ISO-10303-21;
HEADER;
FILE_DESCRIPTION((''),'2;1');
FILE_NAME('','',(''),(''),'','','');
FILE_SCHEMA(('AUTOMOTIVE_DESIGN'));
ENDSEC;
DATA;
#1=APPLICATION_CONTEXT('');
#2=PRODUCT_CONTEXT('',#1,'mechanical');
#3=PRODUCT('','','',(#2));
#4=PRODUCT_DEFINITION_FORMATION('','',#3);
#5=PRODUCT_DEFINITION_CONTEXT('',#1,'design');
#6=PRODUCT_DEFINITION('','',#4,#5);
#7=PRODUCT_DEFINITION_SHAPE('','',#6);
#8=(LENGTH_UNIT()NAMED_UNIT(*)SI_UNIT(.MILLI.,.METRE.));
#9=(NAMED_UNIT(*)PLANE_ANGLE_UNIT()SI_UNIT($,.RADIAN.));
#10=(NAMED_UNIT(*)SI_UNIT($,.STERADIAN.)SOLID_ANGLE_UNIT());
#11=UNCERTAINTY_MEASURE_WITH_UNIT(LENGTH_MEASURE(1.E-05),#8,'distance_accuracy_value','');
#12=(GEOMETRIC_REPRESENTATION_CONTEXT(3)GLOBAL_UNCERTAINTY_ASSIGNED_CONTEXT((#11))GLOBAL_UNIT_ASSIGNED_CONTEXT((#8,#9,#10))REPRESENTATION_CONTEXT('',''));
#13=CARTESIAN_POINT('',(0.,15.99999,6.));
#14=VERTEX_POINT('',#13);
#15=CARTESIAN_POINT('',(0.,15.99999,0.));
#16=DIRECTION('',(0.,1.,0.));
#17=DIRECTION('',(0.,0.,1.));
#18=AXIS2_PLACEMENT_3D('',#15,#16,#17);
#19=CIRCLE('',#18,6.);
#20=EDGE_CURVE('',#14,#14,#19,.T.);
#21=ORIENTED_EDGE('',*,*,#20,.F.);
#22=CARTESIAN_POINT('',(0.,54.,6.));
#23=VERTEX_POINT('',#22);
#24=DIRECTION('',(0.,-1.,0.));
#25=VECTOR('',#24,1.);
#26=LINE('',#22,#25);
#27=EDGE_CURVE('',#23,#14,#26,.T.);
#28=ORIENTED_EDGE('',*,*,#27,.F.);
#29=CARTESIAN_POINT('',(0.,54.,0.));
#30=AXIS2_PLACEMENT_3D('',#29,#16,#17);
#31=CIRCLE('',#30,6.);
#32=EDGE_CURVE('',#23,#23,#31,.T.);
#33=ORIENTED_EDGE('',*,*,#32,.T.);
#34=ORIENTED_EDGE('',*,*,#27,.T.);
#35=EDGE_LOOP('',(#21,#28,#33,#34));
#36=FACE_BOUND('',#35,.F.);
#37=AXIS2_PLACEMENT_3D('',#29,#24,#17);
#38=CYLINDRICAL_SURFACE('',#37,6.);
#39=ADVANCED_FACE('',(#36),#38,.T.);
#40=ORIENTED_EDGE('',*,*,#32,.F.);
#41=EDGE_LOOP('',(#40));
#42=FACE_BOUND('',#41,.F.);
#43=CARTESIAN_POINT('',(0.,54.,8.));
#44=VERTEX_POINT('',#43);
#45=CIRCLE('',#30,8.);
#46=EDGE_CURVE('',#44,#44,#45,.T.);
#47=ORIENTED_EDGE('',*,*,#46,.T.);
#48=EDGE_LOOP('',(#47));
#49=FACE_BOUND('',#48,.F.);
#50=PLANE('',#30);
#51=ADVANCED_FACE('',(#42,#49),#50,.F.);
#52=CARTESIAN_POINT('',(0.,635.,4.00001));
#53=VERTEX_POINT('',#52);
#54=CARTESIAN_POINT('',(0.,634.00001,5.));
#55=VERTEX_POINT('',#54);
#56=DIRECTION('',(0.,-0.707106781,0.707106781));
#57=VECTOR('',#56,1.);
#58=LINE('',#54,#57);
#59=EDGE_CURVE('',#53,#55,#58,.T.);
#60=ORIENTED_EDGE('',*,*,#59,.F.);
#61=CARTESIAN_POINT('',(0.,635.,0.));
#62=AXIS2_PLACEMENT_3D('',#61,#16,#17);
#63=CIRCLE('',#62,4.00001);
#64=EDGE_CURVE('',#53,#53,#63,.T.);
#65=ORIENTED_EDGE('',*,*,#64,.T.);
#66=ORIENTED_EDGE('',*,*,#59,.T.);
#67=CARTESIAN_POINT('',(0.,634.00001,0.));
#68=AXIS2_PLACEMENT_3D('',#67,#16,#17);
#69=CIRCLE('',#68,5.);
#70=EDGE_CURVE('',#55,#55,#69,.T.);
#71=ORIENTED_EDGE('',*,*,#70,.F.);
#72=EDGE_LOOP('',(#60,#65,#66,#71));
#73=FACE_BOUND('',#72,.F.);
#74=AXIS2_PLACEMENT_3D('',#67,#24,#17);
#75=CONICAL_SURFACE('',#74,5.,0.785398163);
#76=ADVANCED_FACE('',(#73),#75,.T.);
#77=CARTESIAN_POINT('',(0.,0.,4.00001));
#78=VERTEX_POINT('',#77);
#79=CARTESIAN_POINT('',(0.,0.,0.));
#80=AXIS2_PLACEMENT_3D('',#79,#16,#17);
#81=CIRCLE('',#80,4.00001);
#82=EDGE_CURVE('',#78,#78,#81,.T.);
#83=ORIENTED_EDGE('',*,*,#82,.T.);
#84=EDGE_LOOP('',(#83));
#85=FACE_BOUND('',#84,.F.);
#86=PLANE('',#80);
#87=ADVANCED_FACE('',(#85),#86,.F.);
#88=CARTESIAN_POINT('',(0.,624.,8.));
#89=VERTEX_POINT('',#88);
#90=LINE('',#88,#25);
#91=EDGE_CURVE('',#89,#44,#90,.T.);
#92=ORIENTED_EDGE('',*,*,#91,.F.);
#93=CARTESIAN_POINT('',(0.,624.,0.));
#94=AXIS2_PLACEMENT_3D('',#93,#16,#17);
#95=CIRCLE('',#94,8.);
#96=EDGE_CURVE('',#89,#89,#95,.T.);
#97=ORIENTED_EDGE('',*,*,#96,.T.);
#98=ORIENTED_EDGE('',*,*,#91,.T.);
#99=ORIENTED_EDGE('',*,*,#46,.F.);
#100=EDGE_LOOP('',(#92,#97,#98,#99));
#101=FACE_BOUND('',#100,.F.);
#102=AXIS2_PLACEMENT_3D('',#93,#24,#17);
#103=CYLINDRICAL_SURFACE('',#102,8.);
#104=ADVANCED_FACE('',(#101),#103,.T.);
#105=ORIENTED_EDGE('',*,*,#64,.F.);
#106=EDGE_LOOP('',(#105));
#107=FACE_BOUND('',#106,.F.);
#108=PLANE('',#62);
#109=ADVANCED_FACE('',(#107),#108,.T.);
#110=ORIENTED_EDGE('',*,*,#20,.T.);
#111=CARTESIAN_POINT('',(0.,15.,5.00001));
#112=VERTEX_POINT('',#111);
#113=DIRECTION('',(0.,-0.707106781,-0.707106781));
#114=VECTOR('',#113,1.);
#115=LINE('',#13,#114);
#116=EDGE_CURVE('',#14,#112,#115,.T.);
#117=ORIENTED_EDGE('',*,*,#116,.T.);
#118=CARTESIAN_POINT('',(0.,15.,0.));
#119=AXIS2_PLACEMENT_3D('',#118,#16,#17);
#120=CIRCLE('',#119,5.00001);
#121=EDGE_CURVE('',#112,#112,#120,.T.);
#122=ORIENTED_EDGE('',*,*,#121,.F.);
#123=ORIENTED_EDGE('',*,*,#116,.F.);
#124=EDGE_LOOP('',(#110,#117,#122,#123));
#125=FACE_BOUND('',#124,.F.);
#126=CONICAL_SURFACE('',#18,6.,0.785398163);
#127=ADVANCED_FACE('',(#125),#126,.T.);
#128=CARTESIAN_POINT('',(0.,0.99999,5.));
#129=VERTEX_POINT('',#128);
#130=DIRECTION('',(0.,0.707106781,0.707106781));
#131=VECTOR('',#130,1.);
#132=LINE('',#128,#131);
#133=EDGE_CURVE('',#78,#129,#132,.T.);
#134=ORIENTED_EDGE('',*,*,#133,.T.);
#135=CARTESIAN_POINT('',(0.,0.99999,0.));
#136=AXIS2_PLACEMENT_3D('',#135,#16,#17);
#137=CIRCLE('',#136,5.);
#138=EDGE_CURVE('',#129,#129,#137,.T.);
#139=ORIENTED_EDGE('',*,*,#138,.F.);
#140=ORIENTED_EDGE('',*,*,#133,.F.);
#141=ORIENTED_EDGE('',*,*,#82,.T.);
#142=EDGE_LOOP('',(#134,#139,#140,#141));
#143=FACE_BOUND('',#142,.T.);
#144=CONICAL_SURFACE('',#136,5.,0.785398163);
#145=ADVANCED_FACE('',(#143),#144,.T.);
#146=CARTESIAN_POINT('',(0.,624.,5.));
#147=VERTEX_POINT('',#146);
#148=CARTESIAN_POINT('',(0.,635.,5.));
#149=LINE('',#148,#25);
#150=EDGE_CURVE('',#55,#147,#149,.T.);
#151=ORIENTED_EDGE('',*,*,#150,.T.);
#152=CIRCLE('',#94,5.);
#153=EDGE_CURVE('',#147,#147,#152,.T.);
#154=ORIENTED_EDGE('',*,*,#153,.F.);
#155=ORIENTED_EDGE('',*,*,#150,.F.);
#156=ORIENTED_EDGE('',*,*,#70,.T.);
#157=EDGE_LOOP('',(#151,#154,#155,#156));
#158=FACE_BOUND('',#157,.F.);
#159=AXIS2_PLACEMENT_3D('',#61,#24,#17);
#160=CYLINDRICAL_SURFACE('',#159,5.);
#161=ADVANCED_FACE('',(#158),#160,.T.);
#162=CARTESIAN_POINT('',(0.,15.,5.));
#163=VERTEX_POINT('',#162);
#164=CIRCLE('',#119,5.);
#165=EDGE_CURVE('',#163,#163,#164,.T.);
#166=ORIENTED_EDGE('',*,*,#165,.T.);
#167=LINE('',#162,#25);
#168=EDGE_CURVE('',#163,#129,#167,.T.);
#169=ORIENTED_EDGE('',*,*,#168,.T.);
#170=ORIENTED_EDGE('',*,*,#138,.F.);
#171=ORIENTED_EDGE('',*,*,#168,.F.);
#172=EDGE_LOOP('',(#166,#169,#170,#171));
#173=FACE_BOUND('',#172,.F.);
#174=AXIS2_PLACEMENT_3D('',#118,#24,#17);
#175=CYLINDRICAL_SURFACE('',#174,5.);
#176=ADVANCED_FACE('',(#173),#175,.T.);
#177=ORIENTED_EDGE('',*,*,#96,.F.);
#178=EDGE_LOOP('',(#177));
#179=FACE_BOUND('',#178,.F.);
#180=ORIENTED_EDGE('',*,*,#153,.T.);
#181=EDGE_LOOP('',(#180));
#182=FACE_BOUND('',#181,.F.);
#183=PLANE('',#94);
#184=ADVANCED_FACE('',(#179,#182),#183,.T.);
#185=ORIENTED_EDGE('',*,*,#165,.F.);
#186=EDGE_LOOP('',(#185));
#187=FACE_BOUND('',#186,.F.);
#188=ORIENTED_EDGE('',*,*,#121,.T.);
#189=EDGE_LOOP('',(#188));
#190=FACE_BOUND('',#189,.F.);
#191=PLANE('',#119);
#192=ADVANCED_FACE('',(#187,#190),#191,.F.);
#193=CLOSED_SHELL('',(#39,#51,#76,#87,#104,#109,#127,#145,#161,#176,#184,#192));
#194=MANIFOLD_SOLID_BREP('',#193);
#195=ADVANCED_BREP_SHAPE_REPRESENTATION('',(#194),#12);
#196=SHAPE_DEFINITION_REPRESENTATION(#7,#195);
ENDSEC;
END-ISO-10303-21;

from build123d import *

# Parameters (mm, degrees)
F2_SIZE = 0.99999


# Not quite as in the source:
# - a fillet or chamfer is up to 0.001 mm smaller than in the source, because OpenCascade refuses the exact size


with BuildPart() as f1:
    # F0 (on Right) → F1 (revolve)
    with BuildSketch(Plane.YZ):
        Polygon((0, 5), (0, 0), (635, 0), (635, 5), (624, 5), (624, 8), (54, 8), (54, 6), (15, 6), (15, 5), align=None)
    revolve(axis=Axis((0, 344.1624132916, 0), (0, 1, 0)))

    # F2 (size 1 in the source; OpenCascade refuses exactly that, so slightly less here)
    f2_edges = [f1.edges().sort_by_distance(p)[0] for p in [
        (0, 0, -5),
        (0, 15, -6),
        (0, 635, -5),
    ]]
    chamfer(f2_edges, length=F2_SIZE)


solid = f1.part
